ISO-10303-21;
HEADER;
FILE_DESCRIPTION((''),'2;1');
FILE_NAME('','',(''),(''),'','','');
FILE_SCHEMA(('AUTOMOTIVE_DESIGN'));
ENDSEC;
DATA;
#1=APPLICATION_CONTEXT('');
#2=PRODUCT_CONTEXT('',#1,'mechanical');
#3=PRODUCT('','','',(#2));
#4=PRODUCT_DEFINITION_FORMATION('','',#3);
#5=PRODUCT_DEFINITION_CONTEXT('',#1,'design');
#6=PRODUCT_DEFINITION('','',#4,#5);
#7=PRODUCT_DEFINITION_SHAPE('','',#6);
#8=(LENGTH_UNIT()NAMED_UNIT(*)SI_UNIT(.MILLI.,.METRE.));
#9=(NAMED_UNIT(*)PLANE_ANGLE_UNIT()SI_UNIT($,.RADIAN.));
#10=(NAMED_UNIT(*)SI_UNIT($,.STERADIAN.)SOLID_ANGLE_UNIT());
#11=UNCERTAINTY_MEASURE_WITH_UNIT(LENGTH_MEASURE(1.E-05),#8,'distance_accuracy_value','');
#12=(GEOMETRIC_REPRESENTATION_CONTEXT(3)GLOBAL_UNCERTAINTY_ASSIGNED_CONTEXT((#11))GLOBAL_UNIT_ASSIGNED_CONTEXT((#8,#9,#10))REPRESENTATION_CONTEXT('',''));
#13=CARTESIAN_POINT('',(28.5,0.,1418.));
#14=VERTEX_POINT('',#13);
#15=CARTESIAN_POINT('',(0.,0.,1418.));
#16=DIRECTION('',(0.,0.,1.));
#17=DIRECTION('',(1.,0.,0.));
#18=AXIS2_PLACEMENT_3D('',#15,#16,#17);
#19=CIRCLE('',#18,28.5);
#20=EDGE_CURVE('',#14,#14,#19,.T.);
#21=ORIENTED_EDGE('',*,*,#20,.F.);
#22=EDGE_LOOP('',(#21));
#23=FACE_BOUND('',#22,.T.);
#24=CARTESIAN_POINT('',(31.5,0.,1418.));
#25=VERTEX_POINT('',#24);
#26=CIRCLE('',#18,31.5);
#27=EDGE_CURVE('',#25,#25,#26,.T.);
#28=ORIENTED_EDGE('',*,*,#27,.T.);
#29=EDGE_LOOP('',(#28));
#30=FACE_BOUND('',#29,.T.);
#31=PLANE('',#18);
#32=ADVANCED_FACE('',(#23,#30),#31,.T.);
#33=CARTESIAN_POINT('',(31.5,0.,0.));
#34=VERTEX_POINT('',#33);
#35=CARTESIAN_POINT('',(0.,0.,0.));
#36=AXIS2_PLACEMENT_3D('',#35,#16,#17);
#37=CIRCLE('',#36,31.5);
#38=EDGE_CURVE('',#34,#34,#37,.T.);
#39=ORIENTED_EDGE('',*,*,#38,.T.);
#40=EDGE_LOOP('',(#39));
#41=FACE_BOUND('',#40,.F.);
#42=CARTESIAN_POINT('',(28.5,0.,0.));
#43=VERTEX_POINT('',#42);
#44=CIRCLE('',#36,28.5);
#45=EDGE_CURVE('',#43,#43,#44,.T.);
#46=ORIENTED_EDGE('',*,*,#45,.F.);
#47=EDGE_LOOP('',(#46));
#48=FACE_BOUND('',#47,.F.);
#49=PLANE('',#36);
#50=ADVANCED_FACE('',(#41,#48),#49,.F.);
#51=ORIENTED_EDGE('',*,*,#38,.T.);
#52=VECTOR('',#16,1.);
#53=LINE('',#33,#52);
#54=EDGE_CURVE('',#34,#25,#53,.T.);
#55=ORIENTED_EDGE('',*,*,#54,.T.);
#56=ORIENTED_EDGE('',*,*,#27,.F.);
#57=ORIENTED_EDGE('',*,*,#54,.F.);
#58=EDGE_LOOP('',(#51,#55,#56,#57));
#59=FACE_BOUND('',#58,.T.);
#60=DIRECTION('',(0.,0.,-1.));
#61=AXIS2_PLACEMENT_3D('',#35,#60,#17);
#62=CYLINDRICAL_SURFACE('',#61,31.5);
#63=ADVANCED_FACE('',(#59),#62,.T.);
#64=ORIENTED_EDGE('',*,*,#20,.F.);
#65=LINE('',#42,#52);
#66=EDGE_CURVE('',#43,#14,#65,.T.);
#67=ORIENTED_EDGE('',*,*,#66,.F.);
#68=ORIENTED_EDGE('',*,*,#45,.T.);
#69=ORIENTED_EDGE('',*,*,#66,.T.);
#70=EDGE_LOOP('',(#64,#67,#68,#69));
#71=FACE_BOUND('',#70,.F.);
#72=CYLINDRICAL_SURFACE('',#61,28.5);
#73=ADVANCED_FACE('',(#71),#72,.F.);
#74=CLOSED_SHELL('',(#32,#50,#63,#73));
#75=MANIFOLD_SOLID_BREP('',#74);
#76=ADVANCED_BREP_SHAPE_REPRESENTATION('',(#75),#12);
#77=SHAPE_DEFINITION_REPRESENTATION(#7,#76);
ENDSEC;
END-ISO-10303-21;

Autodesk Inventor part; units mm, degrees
ref_plane "YZ Plane" through (0, 0, 0) normal (1, 0, 0) x (0, 1, 0)
ref_plane "XZ Plane" through (0, 0, 0) normal (0, 1, 0) x (-1, 0, 0)
ref_plane "XY Plane" through (0, 0, 0) normal (0, 0, 1) x (1, 0, 0)
sketch "Sketch1" plane through (0, 0, 0) normal (0, 0, 1) x (1, 0, 0)
  circle A0 centre (0, 0) radius 31.5
  circle A1 centre (0, 0) radius 28.5
  dimension "d0" = 63
  dimension "d1" = 3
extrude "Extrusion1" add sketch "Sketch1" along normal blind 6000
sketch "Sketch2" plane through (0, 0, 6000) normal (0, 0, 1) x (1, 0, 0)
  circle A0 centre (0, 0) radius 28.5 projected
  circle A1 centre (0, 0) radius 31.5 projected
extrude "Extrusion2" cut sketch "Sketch2" against normal blind 4582
properties part number "pvcSection" material "PVC-Piping"
